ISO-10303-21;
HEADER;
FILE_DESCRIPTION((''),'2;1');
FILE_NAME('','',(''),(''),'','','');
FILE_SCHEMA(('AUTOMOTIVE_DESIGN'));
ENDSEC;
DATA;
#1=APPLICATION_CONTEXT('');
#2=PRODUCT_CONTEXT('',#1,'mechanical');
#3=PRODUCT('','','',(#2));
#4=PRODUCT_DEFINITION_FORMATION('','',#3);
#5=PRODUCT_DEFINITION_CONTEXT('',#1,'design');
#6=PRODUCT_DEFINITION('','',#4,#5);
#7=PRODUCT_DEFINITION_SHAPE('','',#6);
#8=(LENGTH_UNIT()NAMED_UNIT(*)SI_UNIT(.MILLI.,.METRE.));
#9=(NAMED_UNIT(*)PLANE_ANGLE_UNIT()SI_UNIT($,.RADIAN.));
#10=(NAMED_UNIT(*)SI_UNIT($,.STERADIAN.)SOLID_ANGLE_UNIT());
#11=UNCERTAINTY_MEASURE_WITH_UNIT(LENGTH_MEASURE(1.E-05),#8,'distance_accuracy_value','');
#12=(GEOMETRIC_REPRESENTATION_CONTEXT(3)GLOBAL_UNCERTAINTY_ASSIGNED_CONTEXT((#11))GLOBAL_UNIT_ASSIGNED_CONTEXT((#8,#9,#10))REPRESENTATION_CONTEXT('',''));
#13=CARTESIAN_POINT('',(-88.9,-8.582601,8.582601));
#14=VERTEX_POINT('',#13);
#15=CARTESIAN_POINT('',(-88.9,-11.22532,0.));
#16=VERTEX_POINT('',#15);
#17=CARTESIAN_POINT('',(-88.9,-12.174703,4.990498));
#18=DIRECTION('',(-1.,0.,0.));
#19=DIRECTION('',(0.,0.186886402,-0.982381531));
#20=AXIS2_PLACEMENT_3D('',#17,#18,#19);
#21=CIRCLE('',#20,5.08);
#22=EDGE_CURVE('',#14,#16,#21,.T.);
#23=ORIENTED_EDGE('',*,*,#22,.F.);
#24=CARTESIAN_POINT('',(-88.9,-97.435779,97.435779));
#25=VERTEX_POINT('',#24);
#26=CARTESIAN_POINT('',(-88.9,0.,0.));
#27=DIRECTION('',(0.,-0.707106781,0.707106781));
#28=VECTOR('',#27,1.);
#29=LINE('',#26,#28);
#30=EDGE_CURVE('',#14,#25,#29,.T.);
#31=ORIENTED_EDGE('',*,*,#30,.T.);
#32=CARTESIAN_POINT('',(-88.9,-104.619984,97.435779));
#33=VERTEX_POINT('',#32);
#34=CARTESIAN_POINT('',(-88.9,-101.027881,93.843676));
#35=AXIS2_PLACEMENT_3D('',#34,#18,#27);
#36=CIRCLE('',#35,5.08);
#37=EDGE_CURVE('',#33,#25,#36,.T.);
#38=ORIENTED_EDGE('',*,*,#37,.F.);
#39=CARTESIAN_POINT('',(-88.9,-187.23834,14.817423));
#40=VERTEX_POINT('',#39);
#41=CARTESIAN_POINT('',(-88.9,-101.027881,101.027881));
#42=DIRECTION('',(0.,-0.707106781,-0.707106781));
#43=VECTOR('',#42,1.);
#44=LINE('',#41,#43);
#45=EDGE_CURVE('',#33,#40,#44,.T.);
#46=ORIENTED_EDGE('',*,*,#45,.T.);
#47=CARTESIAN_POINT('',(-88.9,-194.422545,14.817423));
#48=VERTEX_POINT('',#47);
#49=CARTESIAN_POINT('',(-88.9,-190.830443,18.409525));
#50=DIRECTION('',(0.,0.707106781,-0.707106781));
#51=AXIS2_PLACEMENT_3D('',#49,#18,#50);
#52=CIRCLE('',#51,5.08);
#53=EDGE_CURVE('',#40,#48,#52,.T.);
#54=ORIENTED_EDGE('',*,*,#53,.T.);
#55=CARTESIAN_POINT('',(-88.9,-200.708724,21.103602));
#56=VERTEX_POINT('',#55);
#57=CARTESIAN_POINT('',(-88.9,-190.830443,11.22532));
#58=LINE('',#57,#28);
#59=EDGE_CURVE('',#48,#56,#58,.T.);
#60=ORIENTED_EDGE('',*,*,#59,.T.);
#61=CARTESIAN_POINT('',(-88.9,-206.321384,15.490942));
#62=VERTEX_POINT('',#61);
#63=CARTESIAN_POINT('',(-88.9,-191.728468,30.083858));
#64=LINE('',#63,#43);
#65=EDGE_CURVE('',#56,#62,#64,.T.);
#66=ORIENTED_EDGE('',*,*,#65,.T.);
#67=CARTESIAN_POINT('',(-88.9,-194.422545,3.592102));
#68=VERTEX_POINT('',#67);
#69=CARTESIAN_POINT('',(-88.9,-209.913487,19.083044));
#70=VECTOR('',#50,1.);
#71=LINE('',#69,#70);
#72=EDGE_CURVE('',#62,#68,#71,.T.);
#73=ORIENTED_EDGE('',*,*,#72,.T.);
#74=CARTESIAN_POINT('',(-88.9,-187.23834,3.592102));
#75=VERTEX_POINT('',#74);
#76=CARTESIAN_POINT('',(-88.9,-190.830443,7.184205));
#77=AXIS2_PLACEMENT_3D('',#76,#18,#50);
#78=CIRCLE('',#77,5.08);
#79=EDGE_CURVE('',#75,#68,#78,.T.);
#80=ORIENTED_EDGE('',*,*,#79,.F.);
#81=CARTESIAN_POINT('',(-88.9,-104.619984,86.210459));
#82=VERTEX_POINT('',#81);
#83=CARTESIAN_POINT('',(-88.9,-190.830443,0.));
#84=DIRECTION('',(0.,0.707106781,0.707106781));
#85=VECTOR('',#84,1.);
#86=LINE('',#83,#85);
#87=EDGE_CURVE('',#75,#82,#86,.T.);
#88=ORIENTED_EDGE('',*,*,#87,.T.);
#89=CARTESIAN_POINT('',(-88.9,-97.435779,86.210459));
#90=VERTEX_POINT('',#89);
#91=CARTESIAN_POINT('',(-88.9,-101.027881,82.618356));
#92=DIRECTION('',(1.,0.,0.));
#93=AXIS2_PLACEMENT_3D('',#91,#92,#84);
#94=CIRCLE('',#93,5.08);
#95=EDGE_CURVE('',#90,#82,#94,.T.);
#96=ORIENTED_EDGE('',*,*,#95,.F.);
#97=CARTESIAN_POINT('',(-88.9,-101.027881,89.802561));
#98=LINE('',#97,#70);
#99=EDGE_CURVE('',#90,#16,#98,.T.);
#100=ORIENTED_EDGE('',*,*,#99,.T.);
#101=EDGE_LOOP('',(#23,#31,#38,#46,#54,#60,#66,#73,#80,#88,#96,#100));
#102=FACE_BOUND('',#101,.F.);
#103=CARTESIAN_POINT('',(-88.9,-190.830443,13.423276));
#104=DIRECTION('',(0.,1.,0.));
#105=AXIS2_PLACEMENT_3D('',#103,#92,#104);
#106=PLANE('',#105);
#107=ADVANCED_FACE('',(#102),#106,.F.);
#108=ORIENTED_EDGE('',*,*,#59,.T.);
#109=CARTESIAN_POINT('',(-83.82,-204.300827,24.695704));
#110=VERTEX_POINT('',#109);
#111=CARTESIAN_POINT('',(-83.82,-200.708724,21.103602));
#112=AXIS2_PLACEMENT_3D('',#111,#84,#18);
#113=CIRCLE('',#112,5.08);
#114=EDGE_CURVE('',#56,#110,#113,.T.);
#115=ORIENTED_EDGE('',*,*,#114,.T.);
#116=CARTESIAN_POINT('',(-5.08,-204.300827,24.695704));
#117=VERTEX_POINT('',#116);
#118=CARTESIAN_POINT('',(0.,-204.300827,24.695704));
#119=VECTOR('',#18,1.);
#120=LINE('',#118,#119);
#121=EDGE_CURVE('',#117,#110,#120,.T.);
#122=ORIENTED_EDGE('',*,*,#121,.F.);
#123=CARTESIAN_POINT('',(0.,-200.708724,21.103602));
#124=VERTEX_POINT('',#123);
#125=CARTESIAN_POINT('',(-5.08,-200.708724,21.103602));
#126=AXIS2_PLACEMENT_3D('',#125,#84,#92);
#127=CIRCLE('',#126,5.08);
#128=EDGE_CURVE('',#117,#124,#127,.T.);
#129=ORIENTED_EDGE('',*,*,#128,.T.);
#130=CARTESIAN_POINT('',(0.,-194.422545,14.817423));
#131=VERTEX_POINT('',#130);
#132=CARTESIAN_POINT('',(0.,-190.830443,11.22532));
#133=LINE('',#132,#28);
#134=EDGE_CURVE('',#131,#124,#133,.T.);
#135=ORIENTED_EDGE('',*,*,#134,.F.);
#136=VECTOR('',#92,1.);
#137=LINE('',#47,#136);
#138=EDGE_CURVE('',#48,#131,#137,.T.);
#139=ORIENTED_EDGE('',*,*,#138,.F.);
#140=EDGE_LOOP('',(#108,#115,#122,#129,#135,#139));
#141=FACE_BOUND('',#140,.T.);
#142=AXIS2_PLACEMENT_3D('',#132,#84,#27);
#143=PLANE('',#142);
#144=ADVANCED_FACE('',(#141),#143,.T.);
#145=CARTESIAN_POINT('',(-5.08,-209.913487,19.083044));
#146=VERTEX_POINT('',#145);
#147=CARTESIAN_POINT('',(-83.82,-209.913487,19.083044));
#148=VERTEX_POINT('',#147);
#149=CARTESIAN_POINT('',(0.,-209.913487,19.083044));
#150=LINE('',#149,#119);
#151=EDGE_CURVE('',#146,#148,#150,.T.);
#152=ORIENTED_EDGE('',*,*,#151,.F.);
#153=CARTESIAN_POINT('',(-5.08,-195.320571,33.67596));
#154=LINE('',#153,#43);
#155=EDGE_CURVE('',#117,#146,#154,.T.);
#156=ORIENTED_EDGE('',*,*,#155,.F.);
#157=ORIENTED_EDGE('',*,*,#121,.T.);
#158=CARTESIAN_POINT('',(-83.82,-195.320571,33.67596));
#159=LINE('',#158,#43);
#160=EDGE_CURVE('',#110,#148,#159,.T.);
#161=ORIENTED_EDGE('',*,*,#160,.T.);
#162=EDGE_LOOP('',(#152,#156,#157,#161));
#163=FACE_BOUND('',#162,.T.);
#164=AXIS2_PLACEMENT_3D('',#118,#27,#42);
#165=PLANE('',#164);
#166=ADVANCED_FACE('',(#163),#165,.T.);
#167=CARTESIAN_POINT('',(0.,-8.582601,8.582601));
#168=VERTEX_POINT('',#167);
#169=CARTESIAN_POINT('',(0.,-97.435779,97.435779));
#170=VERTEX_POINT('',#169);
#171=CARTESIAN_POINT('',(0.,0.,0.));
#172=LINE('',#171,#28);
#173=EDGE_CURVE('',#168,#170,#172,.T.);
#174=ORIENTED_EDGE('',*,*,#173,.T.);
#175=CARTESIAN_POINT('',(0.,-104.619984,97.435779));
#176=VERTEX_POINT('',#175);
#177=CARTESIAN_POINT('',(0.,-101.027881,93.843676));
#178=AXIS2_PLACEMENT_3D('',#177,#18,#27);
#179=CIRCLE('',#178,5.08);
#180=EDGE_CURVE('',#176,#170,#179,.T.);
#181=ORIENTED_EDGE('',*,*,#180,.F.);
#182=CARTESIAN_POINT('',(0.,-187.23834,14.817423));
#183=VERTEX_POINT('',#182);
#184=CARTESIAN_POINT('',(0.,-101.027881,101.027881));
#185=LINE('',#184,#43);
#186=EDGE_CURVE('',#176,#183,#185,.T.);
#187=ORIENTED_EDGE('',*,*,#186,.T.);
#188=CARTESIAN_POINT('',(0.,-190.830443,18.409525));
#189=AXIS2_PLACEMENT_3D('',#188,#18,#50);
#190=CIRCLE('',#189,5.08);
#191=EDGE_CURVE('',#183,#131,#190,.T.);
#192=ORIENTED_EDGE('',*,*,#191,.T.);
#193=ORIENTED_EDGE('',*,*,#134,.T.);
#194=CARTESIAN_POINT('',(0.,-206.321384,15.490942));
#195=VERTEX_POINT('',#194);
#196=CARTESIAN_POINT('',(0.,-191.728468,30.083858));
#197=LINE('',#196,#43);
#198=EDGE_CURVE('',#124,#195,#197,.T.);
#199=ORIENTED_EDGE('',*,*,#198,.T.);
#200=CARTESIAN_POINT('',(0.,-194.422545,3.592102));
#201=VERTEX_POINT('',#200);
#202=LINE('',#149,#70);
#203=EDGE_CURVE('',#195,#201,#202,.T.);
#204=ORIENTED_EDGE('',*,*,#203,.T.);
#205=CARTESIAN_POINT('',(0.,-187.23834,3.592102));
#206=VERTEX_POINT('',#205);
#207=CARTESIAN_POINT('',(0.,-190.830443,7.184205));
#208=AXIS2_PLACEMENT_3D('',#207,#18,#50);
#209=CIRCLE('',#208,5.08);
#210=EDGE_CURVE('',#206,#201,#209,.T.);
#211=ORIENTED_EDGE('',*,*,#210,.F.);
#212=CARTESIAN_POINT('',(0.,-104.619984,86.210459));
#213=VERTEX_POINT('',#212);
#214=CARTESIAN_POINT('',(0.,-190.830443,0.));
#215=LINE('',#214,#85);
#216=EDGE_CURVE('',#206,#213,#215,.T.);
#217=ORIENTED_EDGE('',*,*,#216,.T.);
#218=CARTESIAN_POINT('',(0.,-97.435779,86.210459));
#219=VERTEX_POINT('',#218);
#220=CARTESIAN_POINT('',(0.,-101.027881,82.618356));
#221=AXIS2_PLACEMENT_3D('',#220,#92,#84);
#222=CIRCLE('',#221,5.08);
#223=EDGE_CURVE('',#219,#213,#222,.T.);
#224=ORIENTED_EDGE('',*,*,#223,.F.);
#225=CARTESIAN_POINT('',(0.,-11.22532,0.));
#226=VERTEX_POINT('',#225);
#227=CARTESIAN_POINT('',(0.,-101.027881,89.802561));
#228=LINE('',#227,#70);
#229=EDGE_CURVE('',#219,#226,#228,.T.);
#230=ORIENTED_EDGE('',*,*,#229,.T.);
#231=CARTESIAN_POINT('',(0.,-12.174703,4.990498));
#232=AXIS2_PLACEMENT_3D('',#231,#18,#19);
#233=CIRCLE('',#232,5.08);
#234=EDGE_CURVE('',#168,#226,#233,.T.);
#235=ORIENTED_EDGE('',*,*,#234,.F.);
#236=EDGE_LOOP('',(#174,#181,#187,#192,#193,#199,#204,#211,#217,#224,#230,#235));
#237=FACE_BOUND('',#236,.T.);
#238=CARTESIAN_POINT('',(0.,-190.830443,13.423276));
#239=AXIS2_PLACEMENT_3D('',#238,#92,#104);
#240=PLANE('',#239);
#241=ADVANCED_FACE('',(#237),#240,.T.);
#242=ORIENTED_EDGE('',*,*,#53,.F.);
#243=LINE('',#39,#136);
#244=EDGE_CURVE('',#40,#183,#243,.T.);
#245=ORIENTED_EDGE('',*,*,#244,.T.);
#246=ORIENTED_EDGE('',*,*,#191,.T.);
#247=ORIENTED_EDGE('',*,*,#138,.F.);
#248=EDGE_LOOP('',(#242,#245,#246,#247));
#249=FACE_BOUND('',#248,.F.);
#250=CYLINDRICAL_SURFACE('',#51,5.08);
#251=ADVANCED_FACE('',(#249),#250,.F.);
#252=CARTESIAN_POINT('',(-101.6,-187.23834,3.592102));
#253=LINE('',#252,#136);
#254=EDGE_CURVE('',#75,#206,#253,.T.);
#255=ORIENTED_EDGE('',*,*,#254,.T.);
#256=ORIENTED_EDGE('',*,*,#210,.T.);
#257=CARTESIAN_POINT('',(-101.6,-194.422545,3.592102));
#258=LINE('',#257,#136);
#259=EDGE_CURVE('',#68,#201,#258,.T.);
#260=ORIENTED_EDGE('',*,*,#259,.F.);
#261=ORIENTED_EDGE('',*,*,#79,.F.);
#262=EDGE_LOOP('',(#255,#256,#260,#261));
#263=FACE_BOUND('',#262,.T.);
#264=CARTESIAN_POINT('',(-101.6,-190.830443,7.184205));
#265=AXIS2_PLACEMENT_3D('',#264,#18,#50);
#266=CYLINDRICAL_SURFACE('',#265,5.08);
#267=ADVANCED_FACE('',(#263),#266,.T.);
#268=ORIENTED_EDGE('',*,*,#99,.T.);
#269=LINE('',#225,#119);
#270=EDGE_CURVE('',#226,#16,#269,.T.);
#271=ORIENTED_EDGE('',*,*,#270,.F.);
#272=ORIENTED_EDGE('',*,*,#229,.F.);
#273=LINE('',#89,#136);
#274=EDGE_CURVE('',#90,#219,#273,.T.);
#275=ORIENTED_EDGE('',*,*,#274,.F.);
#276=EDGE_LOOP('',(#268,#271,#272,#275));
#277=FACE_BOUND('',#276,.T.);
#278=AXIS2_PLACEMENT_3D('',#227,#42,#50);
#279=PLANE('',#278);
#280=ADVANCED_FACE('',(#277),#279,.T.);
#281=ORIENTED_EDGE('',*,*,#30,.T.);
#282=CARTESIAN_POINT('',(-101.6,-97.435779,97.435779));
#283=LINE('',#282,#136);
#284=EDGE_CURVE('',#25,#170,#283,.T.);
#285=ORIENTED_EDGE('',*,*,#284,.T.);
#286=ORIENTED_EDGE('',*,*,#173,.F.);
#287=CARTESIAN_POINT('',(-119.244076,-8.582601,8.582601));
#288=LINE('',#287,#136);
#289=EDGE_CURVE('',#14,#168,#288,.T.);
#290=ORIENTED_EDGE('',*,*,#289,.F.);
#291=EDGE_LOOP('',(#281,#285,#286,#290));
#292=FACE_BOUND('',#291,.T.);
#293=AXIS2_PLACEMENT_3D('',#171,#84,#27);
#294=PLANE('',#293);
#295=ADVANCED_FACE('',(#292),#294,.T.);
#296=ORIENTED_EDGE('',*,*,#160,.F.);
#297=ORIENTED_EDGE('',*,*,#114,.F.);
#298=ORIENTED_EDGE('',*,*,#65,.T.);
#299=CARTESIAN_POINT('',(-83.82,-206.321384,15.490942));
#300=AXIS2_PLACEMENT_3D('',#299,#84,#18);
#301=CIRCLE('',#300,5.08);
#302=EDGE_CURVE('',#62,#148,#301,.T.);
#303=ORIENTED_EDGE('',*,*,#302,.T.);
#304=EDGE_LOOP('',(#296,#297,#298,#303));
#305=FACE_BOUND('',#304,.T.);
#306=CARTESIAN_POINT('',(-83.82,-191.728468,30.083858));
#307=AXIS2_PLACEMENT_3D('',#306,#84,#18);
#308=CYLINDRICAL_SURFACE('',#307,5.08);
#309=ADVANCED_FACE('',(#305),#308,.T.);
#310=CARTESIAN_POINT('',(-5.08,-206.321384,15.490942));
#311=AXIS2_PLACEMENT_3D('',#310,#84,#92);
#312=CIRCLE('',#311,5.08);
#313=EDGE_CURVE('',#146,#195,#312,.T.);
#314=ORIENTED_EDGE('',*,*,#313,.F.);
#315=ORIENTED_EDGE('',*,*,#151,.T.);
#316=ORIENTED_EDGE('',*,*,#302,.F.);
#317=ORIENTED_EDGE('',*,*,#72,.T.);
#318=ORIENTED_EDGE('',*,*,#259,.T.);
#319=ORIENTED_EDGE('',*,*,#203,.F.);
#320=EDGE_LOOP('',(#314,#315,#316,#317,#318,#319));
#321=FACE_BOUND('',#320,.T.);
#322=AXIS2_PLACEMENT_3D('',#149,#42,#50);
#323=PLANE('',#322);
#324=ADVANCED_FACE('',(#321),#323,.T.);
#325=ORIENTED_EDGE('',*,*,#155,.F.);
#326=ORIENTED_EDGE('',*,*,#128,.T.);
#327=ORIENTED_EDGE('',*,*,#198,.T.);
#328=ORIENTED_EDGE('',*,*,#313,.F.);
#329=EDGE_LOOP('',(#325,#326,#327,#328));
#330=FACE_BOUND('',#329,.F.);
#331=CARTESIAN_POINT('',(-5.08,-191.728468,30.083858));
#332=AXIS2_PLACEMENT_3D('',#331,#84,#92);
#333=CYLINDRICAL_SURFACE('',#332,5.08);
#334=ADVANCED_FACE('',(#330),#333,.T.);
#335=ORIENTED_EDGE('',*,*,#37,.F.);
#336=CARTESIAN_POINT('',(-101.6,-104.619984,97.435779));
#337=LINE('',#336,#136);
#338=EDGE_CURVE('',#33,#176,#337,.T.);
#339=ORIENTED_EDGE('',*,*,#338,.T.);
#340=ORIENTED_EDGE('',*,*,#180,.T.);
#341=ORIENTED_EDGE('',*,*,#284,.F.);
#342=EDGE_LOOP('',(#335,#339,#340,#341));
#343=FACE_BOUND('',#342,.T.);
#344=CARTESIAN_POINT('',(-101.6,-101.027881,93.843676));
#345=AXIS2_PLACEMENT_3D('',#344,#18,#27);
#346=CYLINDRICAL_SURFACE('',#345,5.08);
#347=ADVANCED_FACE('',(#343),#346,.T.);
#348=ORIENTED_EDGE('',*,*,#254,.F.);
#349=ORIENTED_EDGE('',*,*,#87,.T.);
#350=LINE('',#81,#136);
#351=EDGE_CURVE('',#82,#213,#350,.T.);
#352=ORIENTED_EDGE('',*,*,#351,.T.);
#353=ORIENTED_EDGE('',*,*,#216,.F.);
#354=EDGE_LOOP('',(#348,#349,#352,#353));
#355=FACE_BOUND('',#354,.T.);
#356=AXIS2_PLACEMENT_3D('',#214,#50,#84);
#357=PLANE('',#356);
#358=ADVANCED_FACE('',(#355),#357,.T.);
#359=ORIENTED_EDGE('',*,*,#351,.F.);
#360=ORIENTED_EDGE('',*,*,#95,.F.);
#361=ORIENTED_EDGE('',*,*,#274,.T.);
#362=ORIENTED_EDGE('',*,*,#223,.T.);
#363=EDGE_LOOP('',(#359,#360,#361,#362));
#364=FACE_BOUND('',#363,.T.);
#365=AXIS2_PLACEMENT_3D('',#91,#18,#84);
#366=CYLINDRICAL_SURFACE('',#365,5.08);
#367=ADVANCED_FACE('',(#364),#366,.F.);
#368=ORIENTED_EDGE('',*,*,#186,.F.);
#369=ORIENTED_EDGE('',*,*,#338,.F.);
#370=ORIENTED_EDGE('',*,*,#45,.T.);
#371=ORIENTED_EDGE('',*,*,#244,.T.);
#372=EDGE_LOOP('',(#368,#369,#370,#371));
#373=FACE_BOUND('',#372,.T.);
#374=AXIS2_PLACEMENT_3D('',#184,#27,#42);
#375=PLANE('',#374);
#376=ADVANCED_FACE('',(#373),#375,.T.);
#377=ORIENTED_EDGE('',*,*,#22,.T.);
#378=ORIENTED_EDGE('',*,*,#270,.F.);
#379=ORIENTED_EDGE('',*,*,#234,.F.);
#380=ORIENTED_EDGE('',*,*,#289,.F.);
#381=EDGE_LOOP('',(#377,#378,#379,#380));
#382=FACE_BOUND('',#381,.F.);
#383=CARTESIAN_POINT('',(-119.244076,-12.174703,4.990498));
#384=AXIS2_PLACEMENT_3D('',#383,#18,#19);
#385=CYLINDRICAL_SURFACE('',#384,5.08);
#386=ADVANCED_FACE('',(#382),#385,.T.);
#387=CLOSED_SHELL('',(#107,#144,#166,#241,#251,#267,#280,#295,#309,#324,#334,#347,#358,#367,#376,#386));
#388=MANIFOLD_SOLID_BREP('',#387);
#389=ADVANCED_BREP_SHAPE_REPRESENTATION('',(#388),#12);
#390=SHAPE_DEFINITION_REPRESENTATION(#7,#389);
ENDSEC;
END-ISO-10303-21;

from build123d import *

# Parameters (mm, degrees)
F1_DEPTH     = 88.9
F2_T1_DEPTH  = 88.9
F2_T3_DEPTH  = 88.9
F2_T5_DEPTH  = 149.5881510316
F2_T7_DEPTH  = 114.3
F2_T9_DEPTH  = 33.3375
F2_T11_DEPTH = 33.3375
F2_T13_DEPTH = 114.3


# Not quite as in the source:
# - a fillet or chamfer that OpenCascade refuses, or shapes differently, is made with other operations: its cross-section is extruded or revolved along the edge and cut away or added


with BuildPart() as f1:
    # F0 (on Right) → F1 (new body)
    with BuildSketch(Plane.YZ):
        Polygon((-11.2253201513, 0), (0, 0), (-101.027881362, 101.027881362), (-190.8304425727, 11.2253201513), (-204.3008267543, 24.6957043329), (-209.91348683, 19.0830442573), (-190.8304425727, 0), (-101.027881362, 89.8025612107), align=None)
    extrude(amount=-F1_DEPTH)

    # F2: fillet of radius 5.08 on 7 edges, made by hand

    # F2_s2 → F2_t1 (join)
    with BuildSketch(Plane.YZ.offset(-88.9)):
        with BuildLine():
            ThreePointArc((-97.4357789136, 86.2104587623), (-101.027881362, 87.6983563138), (-104.6199838105, 86.2104587623))
            Line((-104.6199838105, 86.2104587623), (-101.027881362, 89.8025612107))
            Line((-101.027881362, 89.8025612107), (-97.4357789136, 86.2104587623))
        make_face()
    extrude(amount=F2_T1_DEPTH)

    # F2_s4 → F2_t3 (join)
    with BuildSketch(Plane.YZ.offset(-88.9)):
        with BuildLine():
            ThreePointArc((-187.2383401243, 14.8174225998), (-190.8304425727, 13.3295250482), (-194.4225450211, 14.8174225998))
            Line((-194.4225450211, 14.8174225998), (-190.8304425727, 11.2253201513))
            Line((-190.8304425727, 11.2253201513), (-187.2383401243, 14.8174225998))
        make_face()
    extrude(amount=F2_T3_DEPTH)

    # F2_s6 → F2_t5 (cut)
    with BuildSketch(Plane.YZ.offset(-119.2440755158)):
        with BuildLine():
            ThreePointArc((-11.2253201513, 0), (-7.3196509923, 3.4955502605), (-8.5826006264, 8.5826006264))
            Line((-8.5826006264, 8.5826006264), (0, 0))
            Line((0, 0), (-11.2253201513, 0))
        make_face()
    extrude(amount=F2_T5_DEPTH, mode=Mode.SUBTRACT)

    # F2_s8 → F2_t7 (cut)
    with BuildSketch(Plane.YZ.offset(-101.6)):
        with BuildLine():
            ThreePointArc((-104.6199838105, 97.4357789136), (-101.027881362, 98.9236764652), (-97.4357789136, 97.4357789136))
            Line((-97.4357789136, 97.4357789136), (-101.027881362, 101.027881362))
            Line((-101.027881362, 101.027881362), (-104.6199838105, 97.4357789136))
        make_face()
    extrude(amount=F2_T7_DEPTH, mode=Mode.SUBTRACT)

    # F2_s10 → F2_t9 (cut)
    with BuildSketch(Plane(origin=(0, -80.8223050896, -80.8223050896), x_dir=(1, 0, 0), z_dir=(0, -0.7071067812, -0.7071067812))):
        with BuildLine():
            ThreePointArc((0, 156.845), (-1.4878975516, 160.4371024484), (-5.08, 161.925))
            Line((-5.08, 161.925), (0, 161.925))
            Line((0, 161.925), (0, 156.845))
        make_face()
    extrude(amount=F2_T9_DEPTH, mode=Mode.SUBTRACT)

    # F2_s12 → F2_t11 (cut)
    with BuildSketch(Plane(origin=(0, -80.8223050896, -80.8223050896), x_dir=(1, 0, 0), z_dir=(0, -0.7071067812, -0.7071067812))):
        with BuildLine():
            ThreePointArc((-88.9, 156.845), (-87.4121024484, 160.4371024484), (-83.82, 161.925))
            Line((-83.82, 161.925), (-88.9, 161.925))
            Line((-88.9, 161.925), (-88.9, 156.845))
        make_face()
    extrude(amount=F2_T11_DEPTH, mode=Mode.SUBTRACT)

    # F2_s14 → F2_t13 (cut)
    with BuildSketch(Plane.YZ.offset(-101.6)):
        with BuildLine():
            ThreePointArc((-187.2383401243, 3.5921024484), (-190.8304425727, 2.1042048969), (-194.4225450211, 3.5921024484))
            Line((-194.4225450211, 3.5921024484), (-190.8304425727, 0))
            Line((-190.8304425727, 0), (-187.2383401243, 3.5921024484))
        make_face()
    extrude(amount=F2_T13_DEPTH, mode=Mode.SUBTRACT)


solid = f1.part
